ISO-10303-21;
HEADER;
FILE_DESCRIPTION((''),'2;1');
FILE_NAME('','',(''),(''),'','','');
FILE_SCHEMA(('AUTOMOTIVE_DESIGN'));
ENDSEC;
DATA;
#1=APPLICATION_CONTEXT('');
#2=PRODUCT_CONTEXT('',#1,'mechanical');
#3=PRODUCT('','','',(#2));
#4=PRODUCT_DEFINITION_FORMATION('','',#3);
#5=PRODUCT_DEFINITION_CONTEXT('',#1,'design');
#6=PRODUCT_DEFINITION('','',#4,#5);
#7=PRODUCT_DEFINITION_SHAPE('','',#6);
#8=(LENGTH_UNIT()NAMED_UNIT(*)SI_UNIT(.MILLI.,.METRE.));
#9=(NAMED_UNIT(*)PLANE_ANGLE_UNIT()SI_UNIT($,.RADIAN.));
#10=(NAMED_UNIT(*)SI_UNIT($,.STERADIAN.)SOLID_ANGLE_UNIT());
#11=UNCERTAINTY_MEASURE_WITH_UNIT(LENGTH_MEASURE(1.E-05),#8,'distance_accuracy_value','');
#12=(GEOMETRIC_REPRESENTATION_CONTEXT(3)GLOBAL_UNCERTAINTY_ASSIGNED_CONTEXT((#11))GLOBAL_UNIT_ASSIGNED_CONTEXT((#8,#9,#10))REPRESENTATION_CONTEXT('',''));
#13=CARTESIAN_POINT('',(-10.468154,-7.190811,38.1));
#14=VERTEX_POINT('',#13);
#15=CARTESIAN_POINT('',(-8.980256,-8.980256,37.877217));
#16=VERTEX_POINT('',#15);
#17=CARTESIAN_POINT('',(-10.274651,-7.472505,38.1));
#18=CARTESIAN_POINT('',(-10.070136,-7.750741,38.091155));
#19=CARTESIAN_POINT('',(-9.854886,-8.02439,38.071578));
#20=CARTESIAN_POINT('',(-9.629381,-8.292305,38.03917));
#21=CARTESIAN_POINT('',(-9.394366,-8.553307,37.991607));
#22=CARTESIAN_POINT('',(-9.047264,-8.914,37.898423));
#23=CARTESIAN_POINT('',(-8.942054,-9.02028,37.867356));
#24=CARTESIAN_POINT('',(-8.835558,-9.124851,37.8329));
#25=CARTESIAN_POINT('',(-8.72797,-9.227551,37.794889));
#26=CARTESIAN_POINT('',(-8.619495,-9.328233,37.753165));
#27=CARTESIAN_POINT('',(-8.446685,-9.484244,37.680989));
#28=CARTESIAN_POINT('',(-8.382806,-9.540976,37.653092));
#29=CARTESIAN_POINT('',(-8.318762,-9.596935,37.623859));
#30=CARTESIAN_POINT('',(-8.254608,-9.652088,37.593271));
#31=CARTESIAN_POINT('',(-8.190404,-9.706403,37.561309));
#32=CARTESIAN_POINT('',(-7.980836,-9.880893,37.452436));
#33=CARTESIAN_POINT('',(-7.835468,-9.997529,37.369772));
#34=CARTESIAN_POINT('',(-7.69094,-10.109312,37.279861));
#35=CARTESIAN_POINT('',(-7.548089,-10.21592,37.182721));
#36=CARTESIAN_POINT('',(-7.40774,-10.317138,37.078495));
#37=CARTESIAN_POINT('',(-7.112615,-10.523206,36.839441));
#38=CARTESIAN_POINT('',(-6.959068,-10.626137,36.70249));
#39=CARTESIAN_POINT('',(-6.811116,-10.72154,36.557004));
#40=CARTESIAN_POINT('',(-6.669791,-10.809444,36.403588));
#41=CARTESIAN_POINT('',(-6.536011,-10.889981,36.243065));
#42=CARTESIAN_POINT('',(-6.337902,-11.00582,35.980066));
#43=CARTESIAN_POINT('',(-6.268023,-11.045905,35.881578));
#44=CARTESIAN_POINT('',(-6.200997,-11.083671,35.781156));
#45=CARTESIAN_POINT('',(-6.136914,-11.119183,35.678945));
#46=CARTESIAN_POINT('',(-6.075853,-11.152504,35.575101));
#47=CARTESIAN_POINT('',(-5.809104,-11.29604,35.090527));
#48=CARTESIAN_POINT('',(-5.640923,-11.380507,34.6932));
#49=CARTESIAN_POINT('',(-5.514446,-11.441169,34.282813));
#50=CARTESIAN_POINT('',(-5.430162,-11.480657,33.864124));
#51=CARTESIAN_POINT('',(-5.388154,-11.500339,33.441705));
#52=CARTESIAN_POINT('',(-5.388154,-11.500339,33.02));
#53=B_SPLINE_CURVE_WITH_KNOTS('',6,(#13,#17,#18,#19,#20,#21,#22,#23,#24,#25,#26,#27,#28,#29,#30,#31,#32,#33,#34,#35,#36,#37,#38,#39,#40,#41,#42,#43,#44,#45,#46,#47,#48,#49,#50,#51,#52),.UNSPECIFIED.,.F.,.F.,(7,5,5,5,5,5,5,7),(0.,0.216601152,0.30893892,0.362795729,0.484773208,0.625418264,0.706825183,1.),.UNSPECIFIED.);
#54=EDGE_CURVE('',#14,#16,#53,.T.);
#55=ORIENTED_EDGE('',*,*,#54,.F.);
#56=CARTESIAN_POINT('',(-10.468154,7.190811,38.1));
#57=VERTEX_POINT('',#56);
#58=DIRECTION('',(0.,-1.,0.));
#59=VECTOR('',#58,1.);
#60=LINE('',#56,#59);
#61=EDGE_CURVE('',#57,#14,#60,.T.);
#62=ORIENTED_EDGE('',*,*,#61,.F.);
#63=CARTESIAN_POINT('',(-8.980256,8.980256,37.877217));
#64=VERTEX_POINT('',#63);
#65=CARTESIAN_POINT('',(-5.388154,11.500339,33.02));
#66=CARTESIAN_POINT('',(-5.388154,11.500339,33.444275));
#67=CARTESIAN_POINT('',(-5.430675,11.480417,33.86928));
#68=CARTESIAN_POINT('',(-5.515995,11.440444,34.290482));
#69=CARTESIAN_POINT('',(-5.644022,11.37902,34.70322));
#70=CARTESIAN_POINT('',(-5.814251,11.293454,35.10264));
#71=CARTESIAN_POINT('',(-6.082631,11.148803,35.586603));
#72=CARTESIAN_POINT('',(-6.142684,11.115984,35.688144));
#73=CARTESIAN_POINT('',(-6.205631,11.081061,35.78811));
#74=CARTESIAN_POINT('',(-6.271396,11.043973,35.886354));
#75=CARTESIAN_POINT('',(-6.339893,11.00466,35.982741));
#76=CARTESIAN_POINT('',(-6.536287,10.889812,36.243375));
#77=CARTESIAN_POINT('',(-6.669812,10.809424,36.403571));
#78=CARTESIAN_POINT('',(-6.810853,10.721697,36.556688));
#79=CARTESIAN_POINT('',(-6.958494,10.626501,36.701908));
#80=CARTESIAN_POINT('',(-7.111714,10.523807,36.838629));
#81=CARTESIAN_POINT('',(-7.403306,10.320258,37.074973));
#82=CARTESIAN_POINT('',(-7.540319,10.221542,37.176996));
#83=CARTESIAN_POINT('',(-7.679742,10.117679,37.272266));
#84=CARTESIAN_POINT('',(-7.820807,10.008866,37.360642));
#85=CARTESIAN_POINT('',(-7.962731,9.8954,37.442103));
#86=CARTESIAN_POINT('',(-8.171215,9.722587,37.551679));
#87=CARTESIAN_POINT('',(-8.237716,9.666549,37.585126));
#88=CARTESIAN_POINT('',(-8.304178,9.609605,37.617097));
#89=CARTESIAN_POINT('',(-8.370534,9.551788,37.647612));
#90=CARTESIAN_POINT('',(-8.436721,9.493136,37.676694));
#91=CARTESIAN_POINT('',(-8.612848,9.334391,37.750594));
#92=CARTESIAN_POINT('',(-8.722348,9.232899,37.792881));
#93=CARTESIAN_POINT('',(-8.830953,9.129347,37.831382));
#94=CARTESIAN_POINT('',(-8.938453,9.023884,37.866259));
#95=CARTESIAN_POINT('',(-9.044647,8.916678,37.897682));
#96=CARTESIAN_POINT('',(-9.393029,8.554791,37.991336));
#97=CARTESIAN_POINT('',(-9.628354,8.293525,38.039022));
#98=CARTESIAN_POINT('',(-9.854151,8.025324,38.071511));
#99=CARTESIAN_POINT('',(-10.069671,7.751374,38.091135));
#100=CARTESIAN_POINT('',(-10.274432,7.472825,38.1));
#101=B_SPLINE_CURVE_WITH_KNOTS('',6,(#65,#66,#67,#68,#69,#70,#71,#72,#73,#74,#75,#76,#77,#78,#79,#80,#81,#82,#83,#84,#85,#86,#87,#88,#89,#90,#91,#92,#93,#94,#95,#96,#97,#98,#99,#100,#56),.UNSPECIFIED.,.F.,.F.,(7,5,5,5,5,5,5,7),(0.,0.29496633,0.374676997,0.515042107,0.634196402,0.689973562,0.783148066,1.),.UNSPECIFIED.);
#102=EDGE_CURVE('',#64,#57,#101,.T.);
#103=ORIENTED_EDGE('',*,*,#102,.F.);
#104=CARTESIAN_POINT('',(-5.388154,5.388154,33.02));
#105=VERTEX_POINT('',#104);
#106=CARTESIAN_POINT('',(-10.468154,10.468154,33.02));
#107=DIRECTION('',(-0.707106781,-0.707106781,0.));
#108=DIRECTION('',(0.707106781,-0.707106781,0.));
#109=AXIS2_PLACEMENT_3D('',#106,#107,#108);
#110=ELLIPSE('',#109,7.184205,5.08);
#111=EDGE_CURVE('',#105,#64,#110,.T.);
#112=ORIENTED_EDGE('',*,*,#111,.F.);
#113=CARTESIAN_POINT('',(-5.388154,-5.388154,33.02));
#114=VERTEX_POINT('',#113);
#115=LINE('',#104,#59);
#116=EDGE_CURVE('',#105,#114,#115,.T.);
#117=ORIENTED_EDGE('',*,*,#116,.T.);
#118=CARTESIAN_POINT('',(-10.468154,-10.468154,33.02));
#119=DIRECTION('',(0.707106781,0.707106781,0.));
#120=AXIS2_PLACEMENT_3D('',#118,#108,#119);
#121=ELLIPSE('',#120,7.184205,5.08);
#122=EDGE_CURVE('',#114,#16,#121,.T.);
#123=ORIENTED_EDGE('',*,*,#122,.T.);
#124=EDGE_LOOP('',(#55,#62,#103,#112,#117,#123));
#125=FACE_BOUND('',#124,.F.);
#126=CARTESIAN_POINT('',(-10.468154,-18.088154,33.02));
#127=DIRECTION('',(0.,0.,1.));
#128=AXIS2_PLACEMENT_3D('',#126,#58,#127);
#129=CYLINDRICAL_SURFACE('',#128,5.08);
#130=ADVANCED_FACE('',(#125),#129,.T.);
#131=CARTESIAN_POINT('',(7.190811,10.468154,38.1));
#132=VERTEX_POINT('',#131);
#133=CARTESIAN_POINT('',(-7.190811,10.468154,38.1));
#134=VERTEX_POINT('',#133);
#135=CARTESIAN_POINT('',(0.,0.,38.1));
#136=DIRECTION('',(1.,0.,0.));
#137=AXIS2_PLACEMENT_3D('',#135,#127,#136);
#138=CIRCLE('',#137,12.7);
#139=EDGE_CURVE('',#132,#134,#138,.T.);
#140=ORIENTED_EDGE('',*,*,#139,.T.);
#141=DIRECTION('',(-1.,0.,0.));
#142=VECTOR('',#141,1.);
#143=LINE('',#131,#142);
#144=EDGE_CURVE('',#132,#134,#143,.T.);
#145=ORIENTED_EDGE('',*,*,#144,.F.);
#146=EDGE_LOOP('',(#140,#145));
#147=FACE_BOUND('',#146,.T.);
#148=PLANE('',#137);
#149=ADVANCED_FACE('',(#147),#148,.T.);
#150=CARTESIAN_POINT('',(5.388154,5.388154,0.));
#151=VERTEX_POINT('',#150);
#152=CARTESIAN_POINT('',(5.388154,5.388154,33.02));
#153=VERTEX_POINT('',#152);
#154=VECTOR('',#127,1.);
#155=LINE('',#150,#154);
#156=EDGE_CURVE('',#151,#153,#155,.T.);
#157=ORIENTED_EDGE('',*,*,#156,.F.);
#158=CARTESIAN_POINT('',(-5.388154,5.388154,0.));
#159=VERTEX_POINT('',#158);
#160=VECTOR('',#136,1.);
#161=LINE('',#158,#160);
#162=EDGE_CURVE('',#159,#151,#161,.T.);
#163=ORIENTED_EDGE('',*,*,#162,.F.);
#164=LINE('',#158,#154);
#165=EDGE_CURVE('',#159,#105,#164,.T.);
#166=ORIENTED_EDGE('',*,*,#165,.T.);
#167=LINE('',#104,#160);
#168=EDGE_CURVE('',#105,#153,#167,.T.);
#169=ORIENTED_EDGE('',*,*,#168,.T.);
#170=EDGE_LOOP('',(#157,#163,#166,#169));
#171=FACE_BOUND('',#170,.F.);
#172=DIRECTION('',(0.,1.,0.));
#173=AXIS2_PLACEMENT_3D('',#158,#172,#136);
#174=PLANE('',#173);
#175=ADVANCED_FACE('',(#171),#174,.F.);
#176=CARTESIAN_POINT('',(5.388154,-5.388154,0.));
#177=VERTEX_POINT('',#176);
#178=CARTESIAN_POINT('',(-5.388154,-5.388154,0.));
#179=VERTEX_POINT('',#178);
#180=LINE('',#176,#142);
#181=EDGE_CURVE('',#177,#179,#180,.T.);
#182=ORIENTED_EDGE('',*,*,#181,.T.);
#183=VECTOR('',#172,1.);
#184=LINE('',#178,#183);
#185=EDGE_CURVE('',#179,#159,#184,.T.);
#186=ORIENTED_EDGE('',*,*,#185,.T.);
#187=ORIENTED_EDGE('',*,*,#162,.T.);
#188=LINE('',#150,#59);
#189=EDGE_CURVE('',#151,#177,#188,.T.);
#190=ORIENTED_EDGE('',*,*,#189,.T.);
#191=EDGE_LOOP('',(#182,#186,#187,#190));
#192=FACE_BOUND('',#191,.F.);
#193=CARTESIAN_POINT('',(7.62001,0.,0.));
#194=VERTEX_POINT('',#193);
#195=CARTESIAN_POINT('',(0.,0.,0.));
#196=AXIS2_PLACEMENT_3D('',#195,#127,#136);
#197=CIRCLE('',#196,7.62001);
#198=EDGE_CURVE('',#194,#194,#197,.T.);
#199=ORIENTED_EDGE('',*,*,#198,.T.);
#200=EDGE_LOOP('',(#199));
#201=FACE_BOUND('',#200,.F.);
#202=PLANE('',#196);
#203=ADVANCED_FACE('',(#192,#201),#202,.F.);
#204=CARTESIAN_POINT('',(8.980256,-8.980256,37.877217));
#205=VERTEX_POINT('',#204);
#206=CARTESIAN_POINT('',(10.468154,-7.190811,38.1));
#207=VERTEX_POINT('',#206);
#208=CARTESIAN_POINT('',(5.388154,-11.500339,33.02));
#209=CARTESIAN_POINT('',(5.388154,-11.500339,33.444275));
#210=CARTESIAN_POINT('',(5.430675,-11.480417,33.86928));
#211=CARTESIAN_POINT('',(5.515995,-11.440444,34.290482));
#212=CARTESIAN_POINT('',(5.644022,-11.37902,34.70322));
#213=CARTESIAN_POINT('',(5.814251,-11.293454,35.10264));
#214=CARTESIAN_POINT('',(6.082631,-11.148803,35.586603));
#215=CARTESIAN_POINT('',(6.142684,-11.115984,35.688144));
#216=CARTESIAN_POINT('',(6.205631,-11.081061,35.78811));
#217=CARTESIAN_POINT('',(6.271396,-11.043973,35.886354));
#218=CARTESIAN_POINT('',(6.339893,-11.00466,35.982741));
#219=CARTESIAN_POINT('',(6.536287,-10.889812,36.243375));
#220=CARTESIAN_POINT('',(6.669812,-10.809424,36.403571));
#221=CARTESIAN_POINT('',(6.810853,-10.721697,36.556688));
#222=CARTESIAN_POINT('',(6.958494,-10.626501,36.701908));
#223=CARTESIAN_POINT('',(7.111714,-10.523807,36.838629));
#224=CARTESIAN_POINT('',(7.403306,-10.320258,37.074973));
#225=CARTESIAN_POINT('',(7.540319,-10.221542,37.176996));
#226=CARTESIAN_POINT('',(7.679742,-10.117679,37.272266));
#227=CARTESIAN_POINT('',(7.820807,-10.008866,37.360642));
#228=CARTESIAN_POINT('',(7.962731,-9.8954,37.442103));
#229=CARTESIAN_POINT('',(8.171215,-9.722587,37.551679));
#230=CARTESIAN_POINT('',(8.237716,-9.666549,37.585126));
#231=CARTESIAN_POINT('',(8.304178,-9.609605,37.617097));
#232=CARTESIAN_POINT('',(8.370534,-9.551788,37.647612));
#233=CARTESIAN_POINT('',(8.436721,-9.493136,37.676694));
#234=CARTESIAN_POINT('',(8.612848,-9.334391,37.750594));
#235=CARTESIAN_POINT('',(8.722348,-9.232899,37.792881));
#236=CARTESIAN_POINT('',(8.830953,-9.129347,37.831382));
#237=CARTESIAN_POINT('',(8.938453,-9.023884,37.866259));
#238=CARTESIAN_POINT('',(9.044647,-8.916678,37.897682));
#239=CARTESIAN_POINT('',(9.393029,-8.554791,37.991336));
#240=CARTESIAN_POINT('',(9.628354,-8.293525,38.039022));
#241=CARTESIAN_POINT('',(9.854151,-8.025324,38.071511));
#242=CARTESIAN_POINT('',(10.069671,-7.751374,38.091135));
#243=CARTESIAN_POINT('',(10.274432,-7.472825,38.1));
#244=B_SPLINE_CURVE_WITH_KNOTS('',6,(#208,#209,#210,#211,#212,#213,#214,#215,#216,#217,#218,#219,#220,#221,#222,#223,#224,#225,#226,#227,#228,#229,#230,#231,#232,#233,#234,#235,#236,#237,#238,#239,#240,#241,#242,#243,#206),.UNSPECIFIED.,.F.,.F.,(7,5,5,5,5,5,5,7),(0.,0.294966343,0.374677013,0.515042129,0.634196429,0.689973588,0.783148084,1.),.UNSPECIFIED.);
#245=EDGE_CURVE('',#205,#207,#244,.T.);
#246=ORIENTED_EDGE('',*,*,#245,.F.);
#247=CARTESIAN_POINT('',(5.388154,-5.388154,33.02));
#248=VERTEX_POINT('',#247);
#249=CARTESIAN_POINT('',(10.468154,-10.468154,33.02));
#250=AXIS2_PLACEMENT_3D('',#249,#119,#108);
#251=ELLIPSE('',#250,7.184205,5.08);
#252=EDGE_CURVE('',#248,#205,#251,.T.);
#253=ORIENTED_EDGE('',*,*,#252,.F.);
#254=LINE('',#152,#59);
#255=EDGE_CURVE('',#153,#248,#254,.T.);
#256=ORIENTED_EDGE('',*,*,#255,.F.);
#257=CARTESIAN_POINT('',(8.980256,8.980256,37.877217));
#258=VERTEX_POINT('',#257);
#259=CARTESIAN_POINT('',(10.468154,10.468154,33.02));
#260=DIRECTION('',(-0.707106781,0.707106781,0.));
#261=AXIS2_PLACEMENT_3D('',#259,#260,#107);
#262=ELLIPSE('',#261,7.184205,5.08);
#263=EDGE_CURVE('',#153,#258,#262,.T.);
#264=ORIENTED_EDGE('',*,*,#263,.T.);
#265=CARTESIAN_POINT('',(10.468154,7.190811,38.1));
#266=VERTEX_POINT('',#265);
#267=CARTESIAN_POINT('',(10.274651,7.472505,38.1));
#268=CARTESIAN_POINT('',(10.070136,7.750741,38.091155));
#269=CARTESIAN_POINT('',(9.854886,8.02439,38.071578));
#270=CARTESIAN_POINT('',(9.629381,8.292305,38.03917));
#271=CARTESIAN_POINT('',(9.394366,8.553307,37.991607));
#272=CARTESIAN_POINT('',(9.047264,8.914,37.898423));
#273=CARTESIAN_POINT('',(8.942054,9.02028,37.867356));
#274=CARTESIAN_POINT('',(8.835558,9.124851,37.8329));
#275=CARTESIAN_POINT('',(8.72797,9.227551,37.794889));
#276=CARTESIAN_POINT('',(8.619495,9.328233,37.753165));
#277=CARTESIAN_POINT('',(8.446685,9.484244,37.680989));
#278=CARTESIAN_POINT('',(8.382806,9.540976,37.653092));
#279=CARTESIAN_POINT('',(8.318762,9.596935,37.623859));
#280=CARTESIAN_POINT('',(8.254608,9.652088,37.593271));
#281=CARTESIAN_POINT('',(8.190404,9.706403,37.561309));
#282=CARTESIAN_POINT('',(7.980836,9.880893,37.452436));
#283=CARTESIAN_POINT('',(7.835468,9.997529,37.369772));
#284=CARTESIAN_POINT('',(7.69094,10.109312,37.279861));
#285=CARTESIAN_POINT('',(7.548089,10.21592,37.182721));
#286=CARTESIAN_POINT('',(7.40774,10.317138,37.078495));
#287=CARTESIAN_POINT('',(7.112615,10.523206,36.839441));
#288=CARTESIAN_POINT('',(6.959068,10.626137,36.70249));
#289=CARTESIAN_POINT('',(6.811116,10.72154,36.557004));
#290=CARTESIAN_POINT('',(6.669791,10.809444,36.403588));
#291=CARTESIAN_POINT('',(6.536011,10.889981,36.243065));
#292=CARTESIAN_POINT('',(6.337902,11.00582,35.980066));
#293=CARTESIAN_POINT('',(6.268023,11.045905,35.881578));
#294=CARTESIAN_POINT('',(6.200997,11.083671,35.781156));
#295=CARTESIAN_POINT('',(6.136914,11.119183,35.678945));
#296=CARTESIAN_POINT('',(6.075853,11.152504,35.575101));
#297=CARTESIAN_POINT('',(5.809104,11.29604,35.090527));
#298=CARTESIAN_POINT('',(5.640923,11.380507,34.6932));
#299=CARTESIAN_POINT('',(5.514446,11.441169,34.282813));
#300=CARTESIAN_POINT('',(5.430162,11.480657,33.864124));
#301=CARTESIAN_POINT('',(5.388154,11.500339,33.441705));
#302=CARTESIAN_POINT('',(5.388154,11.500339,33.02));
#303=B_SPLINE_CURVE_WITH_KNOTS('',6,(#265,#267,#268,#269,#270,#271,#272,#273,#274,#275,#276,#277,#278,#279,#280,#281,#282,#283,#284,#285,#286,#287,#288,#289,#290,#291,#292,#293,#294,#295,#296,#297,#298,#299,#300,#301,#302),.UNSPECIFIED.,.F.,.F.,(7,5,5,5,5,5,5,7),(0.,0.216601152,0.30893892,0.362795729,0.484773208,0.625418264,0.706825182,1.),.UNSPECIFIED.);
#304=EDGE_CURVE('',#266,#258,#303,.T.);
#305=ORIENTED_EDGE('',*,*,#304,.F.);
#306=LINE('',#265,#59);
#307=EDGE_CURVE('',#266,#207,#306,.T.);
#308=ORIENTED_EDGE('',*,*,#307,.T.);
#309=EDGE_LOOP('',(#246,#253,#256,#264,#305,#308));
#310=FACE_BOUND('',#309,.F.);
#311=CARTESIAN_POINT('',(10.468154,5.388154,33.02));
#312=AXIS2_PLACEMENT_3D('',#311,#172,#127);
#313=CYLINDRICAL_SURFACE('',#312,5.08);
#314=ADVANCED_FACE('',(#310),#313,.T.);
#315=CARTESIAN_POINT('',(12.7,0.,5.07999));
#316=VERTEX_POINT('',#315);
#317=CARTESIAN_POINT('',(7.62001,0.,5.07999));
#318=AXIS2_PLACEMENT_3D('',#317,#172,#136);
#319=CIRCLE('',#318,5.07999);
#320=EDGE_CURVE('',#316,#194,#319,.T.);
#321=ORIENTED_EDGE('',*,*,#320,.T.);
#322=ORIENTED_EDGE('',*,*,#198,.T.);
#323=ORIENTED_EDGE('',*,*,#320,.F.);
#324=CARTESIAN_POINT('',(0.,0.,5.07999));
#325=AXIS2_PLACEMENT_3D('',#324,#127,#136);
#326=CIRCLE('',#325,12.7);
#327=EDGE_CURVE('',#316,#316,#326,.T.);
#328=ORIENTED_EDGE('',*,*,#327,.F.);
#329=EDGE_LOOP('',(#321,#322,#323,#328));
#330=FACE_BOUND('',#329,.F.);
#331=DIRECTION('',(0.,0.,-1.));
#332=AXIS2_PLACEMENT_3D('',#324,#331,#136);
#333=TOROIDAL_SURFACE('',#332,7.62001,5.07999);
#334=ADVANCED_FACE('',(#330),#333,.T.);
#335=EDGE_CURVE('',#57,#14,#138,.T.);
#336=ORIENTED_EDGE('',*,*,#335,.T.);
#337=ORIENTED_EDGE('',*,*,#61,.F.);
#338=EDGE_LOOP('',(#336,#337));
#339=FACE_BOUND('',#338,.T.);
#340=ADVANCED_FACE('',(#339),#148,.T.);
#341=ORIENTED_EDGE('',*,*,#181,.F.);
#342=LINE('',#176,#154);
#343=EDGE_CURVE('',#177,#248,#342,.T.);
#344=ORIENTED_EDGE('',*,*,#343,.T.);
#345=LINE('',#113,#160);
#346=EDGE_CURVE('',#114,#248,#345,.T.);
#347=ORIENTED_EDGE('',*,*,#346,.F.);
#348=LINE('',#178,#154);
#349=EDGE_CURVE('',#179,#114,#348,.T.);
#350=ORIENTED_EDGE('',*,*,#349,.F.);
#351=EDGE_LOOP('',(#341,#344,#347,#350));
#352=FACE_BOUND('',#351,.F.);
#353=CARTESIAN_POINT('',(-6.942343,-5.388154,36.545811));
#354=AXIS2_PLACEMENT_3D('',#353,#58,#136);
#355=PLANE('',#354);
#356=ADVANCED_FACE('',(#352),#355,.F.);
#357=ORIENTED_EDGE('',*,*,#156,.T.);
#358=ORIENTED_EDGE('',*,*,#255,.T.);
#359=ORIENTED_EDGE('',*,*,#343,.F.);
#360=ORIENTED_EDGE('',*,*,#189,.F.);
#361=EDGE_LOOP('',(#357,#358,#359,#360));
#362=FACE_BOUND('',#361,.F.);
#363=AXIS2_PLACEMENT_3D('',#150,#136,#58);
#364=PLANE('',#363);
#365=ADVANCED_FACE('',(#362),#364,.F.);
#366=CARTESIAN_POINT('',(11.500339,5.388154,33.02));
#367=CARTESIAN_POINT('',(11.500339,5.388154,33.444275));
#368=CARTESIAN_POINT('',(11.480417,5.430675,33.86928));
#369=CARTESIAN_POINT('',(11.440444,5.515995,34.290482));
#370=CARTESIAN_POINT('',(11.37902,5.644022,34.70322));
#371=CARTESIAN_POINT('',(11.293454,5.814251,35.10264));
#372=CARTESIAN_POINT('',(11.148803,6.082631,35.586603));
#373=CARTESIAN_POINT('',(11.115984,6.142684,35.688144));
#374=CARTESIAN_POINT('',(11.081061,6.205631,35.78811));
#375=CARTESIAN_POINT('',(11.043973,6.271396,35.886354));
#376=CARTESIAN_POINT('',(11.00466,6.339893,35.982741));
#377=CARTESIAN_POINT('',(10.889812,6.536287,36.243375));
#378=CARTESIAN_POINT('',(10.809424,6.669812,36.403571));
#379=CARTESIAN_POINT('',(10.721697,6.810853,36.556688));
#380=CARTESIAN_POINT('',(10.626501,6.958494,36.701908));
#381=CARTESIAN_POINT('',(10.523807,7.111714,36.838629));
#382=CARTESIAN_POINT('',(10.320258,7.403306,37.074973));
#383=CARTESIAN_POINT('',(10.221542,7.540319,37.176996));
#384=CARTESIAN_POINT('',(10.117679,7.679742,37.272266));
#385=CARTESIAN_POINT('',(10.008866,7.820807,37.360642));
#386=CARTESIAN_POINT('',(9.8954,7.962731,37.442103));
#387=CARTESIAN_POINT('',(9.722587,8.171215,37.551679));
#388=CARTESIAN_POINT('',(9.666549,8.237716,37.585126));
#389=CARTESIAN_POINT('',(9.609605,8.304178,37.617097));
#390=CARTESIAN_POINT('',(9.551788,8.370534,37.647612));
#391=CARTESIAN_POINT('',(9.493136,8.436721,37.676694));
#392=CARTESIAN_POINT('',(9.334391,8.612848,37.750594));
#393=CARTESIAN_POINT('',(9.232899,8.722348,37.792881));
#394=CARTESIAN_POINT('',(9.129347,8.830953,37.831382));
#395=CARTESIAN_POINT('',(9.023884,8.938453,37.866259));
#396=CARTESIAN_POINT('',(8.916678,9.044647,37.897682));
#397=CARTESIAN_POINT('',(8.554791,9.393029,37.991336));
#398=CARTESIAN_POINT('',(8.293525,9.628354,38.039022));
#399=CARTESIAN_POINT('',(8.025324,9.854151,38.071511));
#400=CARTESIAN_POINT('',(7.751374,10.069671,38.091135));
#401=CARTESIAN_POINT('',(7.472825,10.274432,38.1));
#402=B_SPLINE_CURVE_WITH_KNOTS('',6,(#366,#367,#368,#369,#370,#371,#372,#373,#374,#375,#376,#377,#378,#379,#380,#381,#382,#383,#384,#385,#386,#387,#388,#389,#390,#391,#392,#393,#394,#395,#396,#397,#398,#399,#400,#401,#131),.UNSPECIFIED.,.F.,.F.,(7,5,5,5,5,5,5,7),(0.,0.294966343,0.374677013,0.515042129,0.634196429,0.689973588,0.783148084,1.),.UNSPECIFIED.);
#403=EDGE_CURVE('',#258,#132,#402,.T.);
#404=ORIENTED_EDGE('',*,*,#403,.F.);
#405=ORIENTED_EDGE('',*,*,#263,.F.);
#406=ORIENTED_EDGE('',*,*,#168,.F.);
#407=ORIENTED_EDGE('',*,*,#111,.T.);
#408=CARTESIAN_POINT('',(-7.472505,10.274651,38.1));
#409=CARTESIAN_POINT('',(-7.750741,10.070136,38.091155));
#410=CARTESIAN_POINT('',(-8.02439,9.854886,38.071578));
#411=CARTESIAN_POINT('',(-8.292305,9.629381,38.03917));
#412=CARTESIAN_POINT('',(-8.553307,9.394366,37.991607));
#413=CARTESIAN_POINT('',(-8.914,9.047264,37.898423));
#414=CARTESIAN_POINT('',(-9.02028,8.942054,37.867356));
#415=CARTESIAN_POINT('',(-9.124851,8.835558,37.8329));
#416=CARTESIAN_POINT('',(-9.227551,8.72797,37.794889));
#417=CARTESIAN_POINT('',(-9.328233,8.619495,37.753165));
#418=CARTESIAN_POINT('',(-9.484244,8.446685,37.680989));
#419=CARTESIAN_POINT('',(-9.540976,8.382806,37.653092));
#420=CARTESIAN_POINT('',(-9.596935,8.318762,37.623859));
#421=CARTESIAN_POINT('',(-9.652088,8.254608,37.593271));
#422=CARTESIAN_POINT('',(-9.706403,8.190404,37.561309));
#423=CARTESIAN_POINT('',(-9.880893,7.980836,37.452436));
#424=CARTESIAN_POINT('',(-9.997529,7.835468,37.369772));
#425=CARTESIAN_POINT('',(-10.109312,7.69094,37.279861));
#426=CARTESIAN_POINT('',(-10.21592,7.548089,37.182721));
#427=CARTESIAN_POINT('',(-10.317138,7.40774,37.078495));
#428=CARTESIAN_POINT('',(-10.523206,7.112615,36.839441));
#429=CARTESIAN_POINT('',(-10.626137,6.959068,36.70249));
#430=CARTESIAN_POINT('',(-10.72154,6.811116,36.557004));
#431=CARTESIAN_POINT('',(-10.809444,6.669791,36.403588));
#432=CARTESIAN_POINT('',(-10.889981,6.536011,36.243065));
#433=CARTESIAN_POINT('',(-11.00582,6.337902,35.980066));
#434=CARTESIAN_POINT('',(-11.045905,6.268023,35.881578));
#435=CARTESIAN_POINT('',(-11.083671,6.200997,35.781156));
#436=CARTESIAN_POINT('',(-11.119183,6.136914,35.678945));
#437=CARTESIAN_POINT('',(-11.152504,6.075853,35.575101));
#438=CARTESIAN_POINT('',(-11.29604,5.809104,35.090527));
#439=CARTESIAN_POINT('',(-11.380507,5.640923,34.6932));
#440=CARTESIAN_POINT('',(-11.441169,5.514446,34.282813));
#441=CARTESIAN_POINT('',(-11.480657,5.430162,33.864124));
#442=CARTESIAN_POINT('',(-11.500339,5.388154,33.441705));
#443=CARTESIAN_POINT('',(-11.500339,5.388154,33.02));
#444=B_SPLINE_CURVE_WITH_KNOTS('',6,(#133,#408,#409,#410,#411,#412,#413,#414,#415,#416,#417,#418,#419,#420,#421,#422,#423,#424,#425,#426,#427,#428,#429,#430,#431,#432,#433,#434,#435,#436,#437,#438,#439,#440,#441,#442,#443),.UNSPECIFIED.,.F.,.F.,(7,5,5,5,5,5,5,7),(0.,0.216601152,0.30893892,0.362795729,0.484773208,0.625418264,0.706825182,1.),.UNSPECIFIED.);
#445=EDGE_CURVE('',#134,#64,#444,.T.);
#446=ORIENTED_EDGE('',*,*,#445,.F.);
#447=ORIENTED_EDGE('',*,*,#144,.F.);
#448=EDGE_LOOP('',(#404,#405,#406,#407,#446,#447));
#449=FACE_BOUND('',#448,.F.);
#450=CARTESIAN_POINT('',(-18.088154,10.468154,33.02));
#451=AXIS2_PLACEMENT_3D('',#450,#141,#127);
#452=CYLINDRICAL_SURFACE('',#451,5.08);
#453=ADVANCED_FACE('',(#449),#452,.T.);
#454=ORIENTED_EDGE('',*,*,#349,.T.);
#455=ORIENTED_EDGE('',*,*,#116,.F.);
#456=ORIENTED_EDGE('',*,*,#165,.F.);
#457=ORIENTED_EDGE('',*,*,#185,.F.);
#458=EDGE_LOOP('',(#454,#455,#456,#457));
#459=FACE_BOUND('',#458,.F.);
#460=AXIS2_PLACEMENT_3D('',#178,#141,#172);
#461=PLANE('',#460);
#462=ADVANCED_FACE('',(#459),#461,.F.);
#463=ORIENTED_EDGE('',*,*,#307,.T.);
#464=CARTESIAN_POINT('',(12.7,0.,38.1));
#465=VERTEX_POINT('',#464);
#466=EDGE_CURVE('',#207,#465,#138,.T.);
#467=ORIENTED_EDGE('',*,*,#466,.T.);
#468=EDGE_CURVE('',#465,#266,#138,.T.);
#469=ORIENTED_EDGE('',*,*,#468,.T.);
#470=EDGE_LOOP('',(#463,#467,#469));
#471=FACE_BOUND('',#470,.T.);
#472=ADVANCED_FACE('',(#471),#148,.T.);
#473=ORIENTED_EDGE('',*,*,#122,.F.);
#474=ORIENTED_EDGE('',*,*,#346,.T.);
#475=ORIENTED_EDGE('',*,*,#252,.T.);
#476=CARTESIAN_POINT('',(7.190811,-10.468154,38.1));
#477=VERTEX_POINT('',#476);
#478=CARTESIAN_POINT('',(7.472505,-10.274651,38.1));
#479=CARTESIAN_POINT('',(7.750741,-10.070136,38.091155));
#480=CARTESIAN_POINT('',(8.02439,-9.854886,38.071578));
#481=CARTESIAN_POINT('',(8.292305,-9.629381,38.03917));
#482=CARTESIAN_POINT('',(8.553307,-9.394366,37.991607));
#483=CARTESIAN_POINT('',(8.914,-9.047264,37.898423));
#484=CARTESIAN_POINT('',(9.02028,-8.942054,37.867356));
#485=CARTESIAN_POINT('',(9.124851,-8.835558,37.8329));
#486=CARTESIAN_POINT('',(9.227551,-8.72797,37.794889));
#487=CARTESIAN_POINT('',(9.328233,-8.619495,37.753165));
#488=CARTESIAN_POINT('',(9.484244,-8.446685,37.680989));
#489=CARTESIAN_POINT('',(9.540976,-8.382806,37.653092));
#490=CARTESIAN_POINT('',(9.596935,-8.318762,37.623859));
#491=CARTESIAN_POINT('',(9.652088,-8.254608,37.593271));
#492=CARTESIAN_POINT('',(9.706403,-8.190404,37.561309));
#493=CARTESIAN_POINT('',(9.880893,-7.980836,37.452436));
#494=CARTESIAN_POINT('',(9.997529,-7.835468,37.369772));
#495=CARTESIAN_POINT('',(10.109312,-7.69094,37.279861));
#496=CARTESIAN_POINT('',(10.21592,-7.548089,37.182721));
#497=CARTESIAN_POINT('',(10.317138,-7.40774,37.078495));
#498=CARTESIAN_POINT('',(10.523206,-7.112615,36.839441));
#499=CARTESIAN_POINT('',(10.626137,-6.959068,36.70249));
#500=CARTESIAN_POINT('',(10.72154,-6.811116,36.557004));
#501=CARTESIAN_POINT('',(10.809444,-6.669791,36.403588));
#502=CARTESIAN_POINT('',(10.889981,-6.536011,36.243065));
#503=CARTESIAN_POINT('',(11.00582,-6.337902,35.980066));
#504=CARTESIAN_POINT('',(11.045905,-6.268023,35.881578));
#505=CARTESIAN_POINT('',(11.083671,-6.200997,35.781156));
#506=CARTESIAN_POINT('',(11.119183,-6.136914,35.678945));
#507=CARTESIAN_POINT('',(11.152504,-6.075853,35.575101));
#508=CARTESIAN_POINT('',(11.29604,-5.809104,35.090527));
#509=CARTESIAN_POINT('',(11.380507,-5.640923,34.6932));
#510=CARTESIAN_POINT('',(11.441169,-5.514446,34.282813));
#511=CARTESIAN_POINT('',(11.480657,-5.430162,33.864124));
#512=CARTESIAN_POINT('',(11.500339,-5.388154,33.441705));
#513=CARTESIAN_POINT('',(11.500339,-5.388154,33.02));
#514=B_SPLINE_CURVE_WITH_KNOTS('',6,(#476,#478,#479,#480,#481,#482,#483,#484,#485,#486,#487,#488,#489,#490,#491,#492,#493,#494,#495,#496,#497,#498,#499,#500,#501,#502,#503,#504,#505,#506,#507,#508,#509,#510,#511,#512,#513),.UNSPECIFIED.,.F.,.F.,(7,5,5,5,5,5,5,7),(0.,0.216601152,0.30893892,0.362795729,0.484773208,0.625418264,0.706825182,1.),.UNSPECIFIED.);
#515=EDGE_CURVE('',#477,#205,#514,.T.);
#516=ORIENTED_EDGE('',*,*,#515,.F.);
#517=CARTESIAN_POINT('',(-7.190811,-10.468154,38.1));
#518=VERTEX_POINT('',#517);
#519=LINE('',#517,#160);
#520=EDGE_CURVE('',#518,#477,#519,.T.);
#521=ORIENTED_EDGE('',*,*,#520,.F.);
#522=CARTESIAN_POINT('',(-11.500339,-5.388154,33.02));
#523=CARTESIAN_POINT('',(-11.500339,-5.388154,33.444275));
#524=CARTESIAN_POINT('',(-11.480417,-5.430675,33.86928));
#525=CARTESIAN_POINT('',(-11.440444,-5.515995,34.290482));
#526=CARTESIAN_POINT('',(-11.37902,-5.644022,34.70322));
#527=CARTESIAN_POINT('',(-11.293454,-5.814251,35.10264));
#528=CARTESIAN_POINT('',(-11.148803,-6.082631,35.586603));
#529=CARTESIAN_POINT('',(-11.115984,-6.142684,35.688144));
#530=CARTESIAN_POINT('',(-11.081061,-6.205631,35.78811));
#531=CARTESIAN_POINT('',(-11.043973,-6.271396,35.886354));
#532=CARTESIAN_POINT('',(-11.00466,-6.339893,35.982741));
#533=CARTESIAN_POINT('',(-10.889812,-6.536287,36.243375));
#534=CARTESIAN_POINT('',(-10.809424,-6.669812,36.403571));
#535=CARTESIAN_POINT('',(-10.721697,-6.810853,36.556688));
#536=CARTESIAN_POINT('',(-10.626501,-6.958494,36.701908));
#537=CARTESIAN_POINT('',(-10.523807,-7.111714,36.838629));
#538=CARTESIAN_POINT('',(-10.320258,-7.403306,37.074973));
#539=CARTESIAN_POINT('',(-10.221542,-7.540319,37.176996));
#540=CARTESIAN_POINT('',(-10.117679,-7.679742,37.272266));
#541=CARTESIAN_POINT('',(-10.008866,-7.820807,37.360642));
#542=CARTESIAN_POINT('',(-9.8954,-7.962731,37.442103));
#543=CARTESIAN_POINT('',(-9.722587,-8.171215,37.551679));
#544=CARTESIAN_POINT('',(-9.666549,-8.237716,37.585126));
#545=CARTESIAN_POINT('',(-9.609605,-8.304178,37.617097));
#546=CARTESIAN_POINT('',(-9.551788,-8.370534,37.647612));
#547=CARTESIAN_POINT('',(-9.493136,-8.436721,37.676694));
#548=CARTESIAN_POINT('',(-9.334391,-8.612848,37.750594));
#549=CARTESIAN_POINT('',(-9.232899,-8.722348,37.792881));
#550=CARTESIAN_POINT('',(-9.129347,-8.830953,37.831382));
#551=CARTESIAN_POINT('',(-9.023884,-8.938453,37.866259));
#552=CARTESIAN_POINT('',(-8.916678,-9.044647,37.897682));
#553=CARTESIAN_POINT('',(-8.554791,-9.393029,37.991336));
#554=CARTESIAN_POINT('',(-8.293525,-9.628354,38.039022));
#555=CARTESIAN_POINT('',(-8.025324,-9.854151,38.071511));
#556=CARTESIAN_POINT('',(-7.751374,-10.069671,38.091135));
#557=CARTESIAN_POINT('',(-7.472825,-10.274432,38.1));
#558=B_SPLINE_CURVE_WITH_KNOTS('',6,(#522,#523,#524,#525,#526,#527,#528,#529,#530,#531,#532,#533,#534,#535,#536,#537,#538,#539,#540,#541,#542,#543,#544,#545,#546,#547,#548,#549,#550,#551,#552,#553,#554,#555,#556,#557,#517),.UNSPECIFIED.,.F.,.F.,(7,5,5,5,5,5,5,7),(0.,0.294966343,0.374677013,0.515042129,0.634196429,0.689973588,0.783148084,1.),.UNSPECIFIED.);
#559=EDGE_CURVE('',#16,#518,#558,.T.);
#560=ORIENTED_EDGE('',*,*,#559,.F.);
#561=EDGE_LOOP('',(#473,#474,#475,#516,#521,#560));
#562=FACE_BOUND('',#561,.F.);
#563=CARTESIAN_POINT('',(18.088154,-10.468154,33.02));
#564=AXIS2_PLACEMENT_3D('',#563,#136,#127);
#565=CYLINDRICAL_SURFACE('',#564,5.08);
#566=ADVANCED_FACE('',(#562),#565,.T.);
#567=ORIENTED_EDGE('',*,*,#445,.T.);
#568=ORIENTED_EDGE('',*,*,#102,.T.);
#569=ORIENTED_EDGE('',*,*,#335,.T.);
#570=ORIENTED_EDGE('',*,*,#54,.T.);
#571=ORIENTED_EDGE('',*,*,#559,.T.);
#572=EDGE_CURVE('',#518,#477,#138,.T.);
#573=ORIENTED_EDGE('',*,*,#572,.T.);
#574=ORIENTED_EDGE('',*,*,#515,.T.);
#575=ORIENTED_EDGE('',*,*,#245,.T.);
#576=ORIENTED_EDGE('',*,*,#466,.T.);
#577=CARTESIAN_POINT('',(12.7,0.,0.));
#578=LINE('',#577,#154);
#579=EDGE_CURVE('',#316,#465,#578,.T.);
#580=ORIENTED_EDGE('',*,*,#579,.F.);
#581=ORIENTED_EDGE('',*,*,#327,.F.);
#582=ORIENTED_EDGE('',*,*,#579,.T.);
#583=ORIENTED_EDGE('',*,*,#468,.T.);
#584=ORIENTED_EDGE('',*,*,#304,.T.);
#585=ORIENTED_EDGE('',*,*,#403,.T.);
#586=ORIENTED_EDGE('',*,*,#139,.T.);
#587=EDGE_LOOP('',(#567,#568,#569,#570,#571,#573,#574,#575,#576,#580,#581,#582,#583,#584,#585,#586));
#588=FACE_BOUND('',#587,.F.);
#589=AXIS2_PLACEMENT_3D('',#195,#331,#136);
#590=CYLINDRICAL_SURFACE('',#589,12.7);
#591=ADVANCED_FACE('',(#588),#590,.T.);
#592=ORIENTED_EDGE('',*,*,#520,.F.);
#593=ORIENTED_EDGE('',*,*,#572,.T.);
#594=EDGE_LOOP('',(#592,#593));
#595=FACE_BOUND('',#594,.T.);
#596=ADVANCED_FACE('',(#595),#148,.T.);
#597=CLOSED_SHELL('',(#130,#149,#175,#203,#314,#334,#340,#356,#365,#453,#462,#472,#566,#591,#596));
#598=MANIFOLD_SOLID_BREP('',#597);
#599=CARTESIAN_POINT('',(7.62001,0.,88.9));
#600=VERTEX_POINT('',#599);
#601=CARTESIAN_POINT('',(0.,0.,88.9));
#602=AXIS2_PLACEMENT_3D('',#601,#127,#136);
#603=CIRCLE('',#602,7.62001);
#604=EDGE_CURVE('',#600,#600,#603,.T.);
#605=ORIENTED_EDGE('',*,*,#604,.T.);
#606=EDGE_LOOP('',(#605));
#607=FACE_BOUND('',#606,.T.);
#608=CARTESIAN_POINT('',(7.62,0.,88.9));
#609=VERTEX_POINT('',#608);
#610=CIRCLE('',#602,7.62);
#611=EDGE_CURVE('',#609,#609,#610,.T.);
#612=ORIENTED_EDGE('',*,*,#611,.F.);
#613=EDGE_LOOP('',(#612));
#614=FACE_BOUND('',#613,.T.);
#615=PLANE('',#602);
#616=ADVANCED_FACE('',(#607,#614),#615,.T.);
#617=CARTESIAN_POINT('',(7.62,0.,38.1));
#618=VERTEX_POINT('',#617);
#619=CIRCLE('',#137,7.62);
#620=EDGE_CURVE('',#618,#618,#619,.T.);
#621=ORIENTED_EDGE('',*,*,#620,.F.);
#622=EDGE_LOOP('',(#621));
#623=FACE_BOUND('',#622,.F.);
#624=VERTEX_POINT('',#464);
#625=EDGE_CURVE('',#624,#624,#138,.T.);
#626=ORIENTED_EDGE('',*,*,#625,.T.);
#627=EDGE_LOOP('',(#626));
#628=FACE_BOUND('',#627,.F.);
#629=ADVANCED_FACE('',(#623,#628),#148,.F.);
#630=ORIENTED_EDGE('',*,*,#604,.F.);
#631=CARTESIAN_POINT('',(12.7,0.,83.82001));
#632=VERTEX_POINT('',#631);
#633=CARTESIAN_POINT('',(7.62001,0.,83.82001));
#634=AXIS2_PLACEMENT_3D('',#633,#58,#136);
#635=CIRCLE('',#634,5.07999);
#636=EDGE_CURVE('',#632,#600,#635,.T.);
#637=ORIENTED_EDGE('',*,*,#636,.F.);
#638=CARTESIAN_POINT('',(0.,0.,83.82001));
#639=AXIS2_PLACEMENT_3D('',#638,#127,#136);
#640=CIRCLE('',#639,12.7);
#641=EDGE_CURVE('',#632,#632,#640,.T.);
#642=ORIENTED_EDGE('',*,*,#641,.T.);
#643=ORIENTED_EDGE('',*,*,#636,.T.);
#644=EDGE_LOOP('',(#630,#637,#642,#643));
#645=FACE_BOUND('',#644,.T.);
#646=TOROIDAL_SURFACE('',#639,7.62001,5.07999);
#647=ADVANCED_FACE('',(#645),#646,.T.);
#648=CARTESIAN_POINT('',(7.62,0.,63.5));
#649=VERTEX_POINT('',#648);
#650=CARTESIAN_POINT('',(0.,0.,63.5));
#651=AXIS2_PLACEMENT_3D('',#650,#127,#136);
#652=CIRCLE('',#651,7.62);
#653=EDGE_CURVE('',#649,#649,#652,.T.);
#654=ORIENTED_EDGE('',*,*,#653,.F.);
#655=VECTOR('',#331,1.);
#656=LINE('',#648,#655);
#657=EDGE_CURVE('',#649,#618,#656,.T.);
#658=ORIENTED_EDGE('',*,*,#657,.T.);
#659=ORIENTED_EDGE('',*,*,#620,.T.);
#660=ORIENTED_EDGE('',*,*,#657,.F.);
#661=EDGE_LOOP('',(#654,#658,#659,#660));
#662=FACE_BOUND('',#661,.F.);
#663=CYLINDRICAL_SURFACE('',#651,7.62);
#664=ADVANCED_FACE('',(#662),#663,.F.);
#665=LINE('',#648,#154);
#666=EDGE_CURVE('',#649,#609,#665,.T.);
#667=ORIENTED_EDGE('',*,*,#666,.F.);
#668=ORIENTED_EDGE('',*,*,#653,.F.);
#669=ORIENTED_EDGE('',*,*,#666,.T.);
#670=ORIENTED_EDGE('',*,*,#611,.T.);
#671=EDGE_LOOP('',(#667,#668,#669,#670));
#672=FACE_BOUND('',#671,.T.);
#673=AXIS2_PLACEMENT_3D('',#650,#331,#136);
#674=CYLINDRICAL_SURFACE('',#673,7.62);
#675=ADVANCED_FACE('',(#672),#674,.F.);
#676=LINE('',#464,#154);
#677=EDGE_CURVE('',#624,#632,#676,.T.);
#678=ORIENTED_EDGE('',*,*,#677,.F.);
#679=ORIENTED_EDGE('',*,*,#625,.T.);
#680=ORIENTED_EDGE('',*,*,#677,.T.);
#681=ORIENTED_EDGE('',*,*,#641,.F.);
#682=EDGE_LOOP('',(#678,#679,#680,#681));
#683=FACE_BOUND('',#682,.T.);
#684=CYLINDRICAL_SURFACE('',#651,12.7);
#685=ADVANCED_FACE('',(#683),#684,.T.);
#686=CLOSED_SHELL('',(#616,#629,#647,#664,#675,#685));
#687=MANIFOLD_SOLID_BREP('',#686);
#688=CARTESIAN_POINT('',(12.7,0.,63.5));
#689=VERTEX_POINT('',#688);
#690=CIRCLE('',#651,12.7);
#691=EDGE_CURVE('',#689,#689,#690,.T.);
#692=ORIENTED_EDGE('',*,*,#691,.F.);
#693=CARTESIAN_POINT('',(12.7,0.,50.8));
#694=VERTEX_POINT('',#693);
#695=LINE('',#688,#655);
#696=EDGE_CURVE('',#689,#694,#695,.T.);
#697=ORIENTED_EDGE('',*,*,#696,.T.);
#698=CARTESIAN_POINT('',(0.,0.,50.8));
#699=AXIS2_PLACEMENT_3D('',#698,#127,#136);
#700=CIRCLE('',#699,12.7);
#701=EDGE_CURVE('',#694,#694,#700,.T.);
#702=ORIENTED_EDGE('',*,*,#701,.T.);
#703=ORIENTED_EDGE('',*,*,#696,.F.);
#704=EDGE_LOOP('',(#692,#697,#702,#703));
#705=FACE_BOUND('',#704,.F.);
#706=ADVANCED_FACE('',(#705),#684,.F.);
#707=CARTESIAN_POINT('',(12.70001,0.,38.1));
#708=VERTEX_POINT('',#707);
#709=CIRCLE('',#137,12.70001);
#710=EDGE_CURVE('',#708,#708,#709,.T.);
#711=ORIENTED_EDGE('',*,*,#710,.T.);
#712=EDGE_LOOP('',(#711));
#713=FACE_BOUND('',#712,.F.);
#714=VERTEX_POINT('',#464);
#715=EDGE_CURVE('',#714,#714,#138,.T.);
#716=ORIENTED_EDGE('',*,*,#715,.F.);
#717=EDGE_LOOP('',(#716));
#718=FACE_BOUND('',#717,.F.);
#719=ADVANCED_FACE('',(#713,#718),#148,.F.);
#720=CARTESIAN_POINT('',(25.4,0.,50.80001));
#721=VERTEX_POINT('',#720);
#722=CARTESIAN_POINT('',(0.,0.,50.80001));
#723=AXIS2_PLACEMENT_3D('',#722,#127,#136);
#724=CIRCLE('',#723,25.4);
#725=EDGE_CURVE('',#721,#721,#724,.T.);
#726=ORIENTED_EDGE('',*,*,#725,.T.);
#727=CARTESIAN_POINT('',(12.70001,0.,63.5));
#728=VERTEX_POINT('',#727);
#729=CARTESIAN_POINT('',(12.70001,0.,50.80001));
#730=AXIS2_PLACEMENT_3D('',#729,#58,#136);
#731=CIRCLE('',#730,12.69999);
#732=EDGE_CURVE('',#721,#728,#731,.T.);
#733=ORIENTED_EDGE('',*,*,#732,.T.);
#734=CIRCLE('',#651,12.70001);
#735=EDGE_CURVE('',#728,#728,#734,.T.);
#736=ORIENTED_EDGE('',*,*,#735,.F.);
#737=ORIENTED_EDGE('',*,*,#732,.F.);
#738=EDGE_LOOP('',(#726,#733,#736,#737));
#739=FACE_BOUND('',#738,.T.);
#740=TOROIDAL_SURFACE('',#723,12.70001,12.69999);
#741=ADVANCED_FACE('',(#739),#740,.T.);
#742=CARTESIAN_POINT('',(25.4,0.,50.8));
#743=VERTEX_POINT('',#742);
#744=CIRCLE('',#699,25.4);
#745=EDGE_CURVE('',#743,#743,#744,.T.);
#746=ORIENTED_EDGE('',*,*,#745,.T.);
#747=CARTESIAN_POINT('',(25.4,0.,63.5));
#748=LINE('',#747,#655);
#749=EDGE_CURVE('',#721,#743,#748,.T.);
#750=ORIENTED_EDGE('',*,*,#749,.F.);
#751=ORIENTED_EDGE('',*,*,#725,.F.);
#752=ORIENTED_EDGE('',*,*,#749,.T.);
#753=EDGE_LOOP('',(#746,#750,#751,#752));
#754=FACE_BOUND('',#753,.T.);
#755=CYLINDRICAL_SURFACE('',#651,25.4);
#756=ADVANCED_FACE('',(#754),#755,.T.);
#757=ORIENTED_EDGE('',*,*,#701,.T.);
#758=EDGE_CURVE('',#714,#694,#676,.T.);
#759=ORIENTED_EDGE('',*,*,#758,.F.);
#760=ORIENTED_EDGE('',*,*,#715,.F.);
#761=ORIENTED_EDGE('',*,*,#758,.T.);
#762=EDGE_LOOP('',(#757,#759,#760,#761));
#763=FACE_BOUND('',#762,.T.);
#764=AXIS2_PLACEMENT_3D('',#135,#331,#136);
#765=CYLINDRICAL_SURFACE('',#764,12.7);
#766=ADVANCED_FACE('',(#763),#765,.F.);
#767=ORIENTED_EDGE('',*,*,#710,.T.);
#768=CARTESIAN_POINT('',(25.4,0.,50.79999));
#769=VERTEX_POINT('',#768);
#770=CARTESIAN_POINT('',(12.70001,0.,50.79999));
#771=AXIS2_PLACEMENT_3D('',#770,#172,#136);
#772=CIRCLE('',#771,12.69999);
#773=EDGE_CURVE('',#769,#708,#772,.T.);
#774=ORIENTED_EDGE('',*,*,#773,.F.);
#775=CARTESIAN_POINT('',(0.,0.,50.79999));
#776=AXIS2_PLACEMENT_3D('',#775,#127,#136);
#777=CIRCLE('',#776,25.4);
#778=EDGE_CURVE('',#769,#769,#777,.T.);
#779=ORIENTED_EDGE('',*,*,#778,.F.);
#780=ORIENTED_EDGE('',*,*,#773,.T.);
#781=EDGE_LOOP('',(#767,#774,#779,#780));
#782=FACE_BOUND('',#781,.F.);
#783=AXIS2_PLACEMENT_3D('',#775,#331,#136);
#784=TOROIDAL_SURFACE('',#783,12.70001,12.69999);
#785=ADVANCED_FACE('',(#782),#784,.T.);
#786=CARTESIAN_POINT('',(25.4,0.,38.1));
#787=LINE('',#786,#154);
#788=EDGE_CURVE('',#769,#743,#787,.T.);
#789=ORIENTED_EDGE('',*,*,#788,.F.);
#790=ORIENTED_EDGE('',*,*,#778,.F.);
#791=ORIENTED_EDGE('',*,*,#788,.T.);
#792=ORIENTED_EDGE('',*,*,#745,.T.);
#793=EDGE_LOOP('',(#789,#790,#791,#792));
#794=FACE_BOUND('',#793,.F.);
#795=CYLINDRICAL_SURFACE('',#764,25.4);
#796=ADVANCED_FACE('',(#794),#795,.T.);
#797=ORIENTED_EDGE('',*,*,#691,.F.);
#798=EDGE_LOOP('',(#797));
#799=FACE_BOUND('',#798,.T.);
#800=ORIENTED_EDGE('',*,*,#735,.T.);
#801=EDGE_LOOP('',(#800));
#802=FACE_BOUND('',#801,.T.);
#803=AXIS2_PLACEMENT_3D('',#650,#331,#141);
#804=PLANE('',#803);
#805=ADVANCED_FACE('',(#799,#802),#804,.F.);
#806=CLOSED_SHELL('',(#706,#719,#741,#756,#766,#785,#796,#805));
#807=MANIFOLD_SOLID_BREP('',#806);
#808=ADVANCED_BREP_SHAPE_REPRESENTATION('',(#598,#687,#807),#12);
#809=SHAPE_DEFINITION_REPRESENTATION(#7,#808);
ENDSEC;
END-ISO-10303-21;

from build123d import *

# Parameters (mm, degrees)
F0_R         = 12.7
F1_DEPTH     = 38.1
F2_R         = 25.4
F2_R_2       = 12.7
F3_DEPTH     = 12.7
F4_R         = 12.69999
F5_R         = 5.07999
F6_T1_DEPTH  = 10.7763073453
F6_T3_DEPTH  = 10.7763073453
F6_T9_DEPTH  = 23.4763073453
F6_S10_R     = 12.7
F6_T11_DEPTH = 14
F6_T15_DEPTH = 23.4763073453
F6_S16_R     = 12.7
F6_T17_DEPTH = 14
F6_T24_DEPTH = 23.4763073453
F6_S25_R     = 12.7
F6_T26_DEPTH = 14
F6_T30_DEPTH = 23.4763073453
F6_S31_R     = 12.7
F6_T32_DEPTH = 14
F6_T39_DEPTH = 23.4763073453
F6_S40_R     = 12.7
F6_T41_DEPTH = 14
F6_T45_DEPTH = 23.4763073453
F6_S46_R     = 12.7
F6_T47_DEPTH = 14
F6_T54_DEPTH = 23.4763073453
F6_S55_R     = 12.7
F6_T56_DEPTH = 14
F6_T60_DEPTH = 23.4763073453
F6_S61_R     = 12.7
F6_T62_DEPTH = 14
F9_R         = 12.7
F9_R_2       = 7.62
F10_DEPTH    = 25.4
F11_R        = 5.07999
F12_DEPTH    = 25.4


# Not quite as in the source:
# - a fillet or chamfer that OpenCascade refuses, or shapes differently, is made with other operations: its cross-section is extruded or revolved along the edge and cut away or added
# - a fillet or chamfer is up to 0.001 mm smaller than in the source, because OpenCascade refuses the exact size


with BuildPart() as f1:
    # F0 (on Top) → F1 (new body)
    with BuildSketch(Plane.XY):
        Circle(F0_R)
        with BuildLine():
            ThreePointArc((5.3881536726, 5.3881536726), (7.0399620377, 2.9160477546), (7.62, 0))
            ThreePointArc((7.62, 0), (7.0399620377, -2.9160477546), (5.3881536726, -5.3881536726))
            ThreePointArc((5.3881536726, -5.3881536726), (0, -7.62), (-5.3881536726, -5.3881536726))
            ThreePointArc((-5.3881536726, -5.3881536726), (-7.62, 0), (-5.3881536726, 5.3881536726))
            ThreePointArc((-5.3881536726, 5.3881536726), (0, 7.62), (5.3881536726, 5.3881536726))
        make_face(mode=Mode.SUBTRACT)
        with BuildLine():
            ThreePointArc((-5.3881536726, -5.3881536726), (0, -7.62), (5.3881536726, -5.3881536726))
            Line((5.3881536726, -5.3881536726), (-5.3881536726, -5.3881536726))
        make_face()
        with BuildLine():
            Line((-5.3881536726, -5.3881536726), (-5.3881536726, 5.3881536726))
            ThreePointArc((-5.3881536726, 5.3881536726), (-7.62, 0), (-5.3881536726, -5.3881536726))
        make_face()
        with BuildLine():
            ThreePointArc((5.3881536726, -5.3881536726), (7.0399620377, -2.9160477546), (7.62, 0))
            ThreePointArc((7.62, 0), (7.0399620377, 2.9160477546), (5.3881536726, 5.3881536726))
            Line((5.3881536726, 5.3881536726), (5.3881536726, -5.3881536726))
        make_face()
        with BuildLine():
            Line((-5.3881536726, 5.3881536726), (5.3881536726, 5.3881536726))
            ThreePointArc((5.3881536726, 5.3881536726), (0, 7.62), (-5.3881536726, 5.3881536726))
        make_face()
    extrude(amount=F1_DEPTH)

    # F5 (radius 5.08 in the source; OpenCascade refuses exactly that, so slightly less here)
    f5_edges = [f1.edges().sort_by_distance(p)[0] for p in [
        (-12.7, 0, 0),
    ]]
    fillet(f5_edges, radius=F5_R)

    # F6: fillet of radius 5.08 on 4 edges, made by hand

    # F6_s2 → F6_t1 (cut)
    with BuildSketch(Plane.XZ.offset(-5.3881536726)):
        with BuildLine():
            ThreePointArc((10.4681536726, 38.1), (6.8760512242, 36.6121024484), (5.3881536726, 33.02))
            Line((5.3881536726, 33.02), (5.3881536726, 38.1))
            Line((5.3881536726, 38.1), (10.4681536726, 38.1))
        make_face()
        with BuildLine():
            ThreePointArc((-10.4681536726, 38.1), (-6.8760512242, 36.6121024484), (-5.3881536726, 33.02))
            Line((-5.3881536726, 33.02), (-5.3881536726, 38.1))
            Line((-5.3881536726, 38.1), (-10.4681536726, 38.1))
        make_face()
    extrude(amount=F6_T1_DEPTH, mode=Mode.SUBTRACT)

    # F6_s4 → F6_t3 (cut)
    with BuildSketch(Plane.YZ.offset(-5.3881536726)):
        with BuildLine():
            ThreePointArc((-10.4681536726, 38.1), (-6.8760512242, 36.6121024484), (-5.3881536726, 33.02))
            Line((-5.3881536726, 33.02), (-5.3881536726, 38.1))
            Line((-5.3881536726, 38.1), (-10.4681536726, 38.1))
        make_face()
        with BuildLine():
            ThreePointArc((10.4681536726, 38.1), (6.8760512242, 36.6121024484), (5.3881536726, 33.02))
            Line((5.3881536726, 33.02), (5.3881536726, 38.1))
            Line((5.3881536726, 38.1), (10.4681536726, 38.1))
        make_face()
    extrude(amount=F6_T3_DEPTH, mode=Mode.SUBTRACT)


with BuildPart() as f3:
    # F2 (on face) → F3 (new body)
    with BuildSketch(Plane.XY.offset(38.1)):
        Circle(F2_R)
        Circle(F2_R_2, mode=Mode.SUBTRACT)
    extrude(amount=F3_DEPTH)

    # F4 (radius 12.7 in the source; OpenCascade refuses exactly that, so slightly less here)
    f4_edges = [f3.edges().sort_by_distance(p)[0] for p in [
        (-25.4, 0, 38.1),
    ]]
    fillet(f4_edges, radius=F4_R)

    # F7: F3 across face


with BuildPart() as f6_tool7:
    # F6_s8 → F6_t9 (new body)
    with BuildSketch(Plane.YZ.offset(-5.3881536726)):
        with BuildLine():
            ThreePointArc((10.4681536726, 38.1), (6.8760512242, 36.6121024484), (5.3881536726, 33.02))
            Line((5.3881536726, 33.02), (5.3881536726, 38.1))
            Line((5.3881536726, 38.1), (10.4681536726, 38.1))
        make_face()
    extrude(amount=F6_T9_DEPTH)

    # F6_s10 → F6_t11 (intersect, symmetric)
    with BuildSketch(Plane.XY.offset(35.6)):
        Circle(F6_S10_R)
    extrude(amount=F6_T11_DEPTH, both=True, mode=Mode.INTERSECT)

    split(bisect_by=Plane.YZ.offset(5.3881536726), keep=Keep.TOP)


with BuildPart() as f6_tool13:
    # F6_s14 → F6_t15 (new body)
    with BuildSketch(Plane.XZ.offset(-18.0881536726)):
        with BuildLine():
            ThreePointArc((10.4681536726, 38.1), (6.8760512242, 36.6121024484), (5.3881536726, 33.02))
            Line((5.3881536726, 33.02), (5.3881536726, 38.1))
            Line((5.3881536726, 38.1), (10.4681536726, 38.1))
        make_face()
    extrude(amount=F6_T15_DEPTH)

    # F6_s16 → F6_t17 (intersect, symmetric)
    with BuildSketch(Plane.XY.offset(35.6)):
        Circle(F6_S16_R)
    extrude(amount=F6_T17_DEPTH, both=True, mode=Mode.INTERSECT)

    split(bisect_by=Plane.XZ.offset(-5.3881536726), keep=Keep.BOTTOM)


with BuildPart() as f6_tool7_1:
    add(f6_tool7.part)

    # F6_t19: intersect F6_tool13
    add(f6_tool13.part, mode=Mode.INTERSECT)


with BuildPart() as f1_1:
    add(f1.part)

    # F6_t5: cut F6_tool7
    add(f6_tool7_1.part, mode=Mode.SUBTRACT)


with BuildPart() as f6_tool22:
    # F6_s23 → F6_t24 (new body)
    with BuildSketch(Plane.YZ.offset(18.0881536726)):
        with BuildLine():
            ThreePointArc((-10.4681536726, 38.1), (-6.8760512242, 36.6121024484), (-5.3881536726, 33.02))
            Line((-5.3881536726, 33.02), (-5.3881536726, 38.1))
            Line((-5.3881536726, 38.1), (-10.4681536726, 38.1))
        make_face()
    extrude(amount=-F6_T24_DEPTH)

    # F6_s25 → F6_t26 (intersect, symmetric)
    with BuildSketch(Plane.XY.offset(35.6)):
        Circle(F6_S25_R)
    extrude(amount=F6_T26_DEPTH, both=True, mode=Mode.INTERSECT)

    split(bisect_by=Plane.YZ.offset(5.3881536726), keep=Keep.TOP)


with BuildPart() as f6_tool28:
    # F6_s29 → F6_t30 (new body)
    with BuildSketch(Plane.XZ.offset(-5.3881536726)):
        with BuildLine():
            ThreePointArc((10.4681536726, 38.1), (6.8760512242, 36.6121024484), (5.3881536726, 33.02))
            Line((5.3881536726, 33.02), (5.3881536726, 38.1))
            Line((5.3881536726, 38.1), (10.4681536726, 38.1))
        make_face()
    extrude(amount=F6_T30_DEPTH)

    # F6_s31 → F6_t32 (intersect, symmetric)
    with BuildSketch(Plane.XY.offset(35.6)):
        Circle(F6_S31_R)
    extrude(amount=F6_T32_DEPTH, both=True, mode=Mode.INTERSECT)

    split(bisect_by=Plane.XZ.offset(5.3881536726), keep=Keep.TOP)


with BuildPart() as f6_tool22_1:
    add(f6_tool22.part)

    # F6_t34: intersect F6_tool28
    add(f6_tool28.part, mode=Mode.INTERSECT)


with BuildPart() as f1_2:
    add(f1_1.part)

    # F6_t20: cut F6_tool22
    add(f6_tool22_1.part, mode=Mode.SUBTRACT)


with BuildPart() as f6_tool37:
    # F6_s38 → F6_t39 (new body)
    with BuildSketch(Plane.YZ.offset(5.3881536726)):
        with BuildLine():
            ThreePointArc((-10.4681536726, 38.1), (-6.8760512242, 36.6121024484), (-5.3881536726, 33.02))
            Line((-5.3881536726, 33.02), (-5.3881536726, 38.1))
            Line((-5.3881536726, 38.1), (-10.4681536726, 38.1))
        make_face()
    extrude(amount=-F6_T39_DEPTH)

    # F6_s40 → F6_t41 (intersect, symmetric)
    with BuildSketch(Plane.XY.offset(35.6)):
        Circle(F6_S40_R)
    extrude(amount=F6_T41_DEPTH, both=True, mode=Mode.INTERSECT)

    split(bisect_by=Plane.YZ.offset(-5.3881536726), keep=Keep.BOTTOM)


with BuildPart() as f6_tool43:
    # F6_s44 → F6_t45 (new body)
    with BuildSketch(Plane.XZ.offset(18.0881536726)):
        with BuildLine():
            ThreePointArc((-10.4681536726, 38.1), (-6.8760512242, 36.6121024484), (-5.3881536726, 33.02))
            Line((-5.3881536726, 33.02), (-5.3881536726, 38.1))
            Line((-5.3881536726, 38.1), (-10.4681536726, 38.1))
        make_face()
    extrude(amount=-F6_T45_DEPTH)

    # F6_s46 → F6_t47 (intersect, symmetric)
    with BuildSketch(Plane.XY.offset(35.6)):
        Circle(F6_S46_R)
    extrude(amount=F6_T47_DEPTH, both=True, mode=Mode.INTERSECT)

    split(bisect_by=Plane.XZ.offset(5.3881536726), keep=Keep.TOP)


with BuildPart() as f6_tool37_1:
    add(f6_tool37.part)

    # F6_t49: intersect F6_tool43
    add(f6_tool43.part, mode=Mode.INTERSECT)


with BuildPart() as f1_3:
    add(f1_2.part)

    # F6_t35: cut F6_tool37
    add(f6_tool37_1.part, mode=Mode.SUBTRACT)


with BuildPart() as f6_tool52:
    # F6_s53 → F6_t54 (new body)
    with BuildSketch(Plane.XZ.offset(5.3881536726)):
        with BuildLine():
            ThreePointArc((-10.4681536726, 38.1), (-6.8760512242, 36.6121024484), (-5.3881536726, 33.02))
            Line((-5.3881536726, 33.02), (-5.3881536726, 38.1))
            Line((-5.3881536726, 38.1), (-10.4681536726, 38.1))
        make_face()
    extrude(amount=-F6_T54_DEPTH)

    # F6_s55 → F6_t56 (intersect, symmetric)
    with BuildSketch(Plane.XY.offset(35.6)):
        Circle(F6_S55_R)
    extrude(amount=F6_T56_DEPTH, both=True, mode=Mode.INTERSECT)

    split(bisect_by=Plane.XZ.offset(-5.3881536726), keep=Keep.BOTTOM)


with BuildPart() as f6_tool58:
    # F6_s59 → F6_t60 (new body)
    with BuildSketch(Plane.YZ.offset(-18.0881536726)):
        with BuildLine():
            ThreePointArc((10.4681536726, 38.1), (6.8760512242, 36.6121024484), (5.3881536726, 33.02))
            Line((5.3881536726, 33.02), (5.3881536726, 38.1))
            Line((5.3881536726, 38.1), (10.4681536726, 38.1))
        make_face()
    extrude(amount=F6_T60_DEPTH)

    # F6_s61 → F6_t62 (intersect, symmetric)
    with BuildSketch(Plane.XY.offset(35.6)):
        Circle(F6_S61_R)
    extrude(amount=F6_T62_DEPTH, both=True, mode=Mode.INTERSECT)

    split(bisect_by=Plane.YZ.offset(-5.3881536726), keep=Keep.BOTTOM)


with BuildPart() as f6_tool52_1:
    add(f6_tool52.part)

    # F6_t64: intersect F6_tool58
    add(f6_tool58.part, mode=Mode.INTERSECT)


with BuildPart() as f1_4:
    add(f1_3.part)

    # F6_t50: cut F6_tool52
    add(f6_tool52_1.part, mode=Mode.SUBTRACT)


with BuildPart() as f3_1:
    add(f3.part)
    add(f3.part.mirror(Plane.XY.offset(50.8)))


with BuildPart() as f10:
    # F9 (on offset) → F10 (new body)
    with BuildSketch(Plane.XY.offset(63.5)):
        Circle(F9_R)
        Circle(F9_R_2, mode=Mode.SUBTRACT)
    extrude(amount=F10_DEPTH)

    # F11 (radius 5.08 in the source; OpenCascade refuses exactly that, so slightly less here)
    f11_edges = [f10.edges().sort_by_distance(p)[0] for p in [
        (-12.7, 0, 88.9),
    ]]
    fillet(f11_edges, radius=F11_R)

    # F9 (on offset) → F12 (join)
    with BuildSketch(Plane.XY.offset(63.5)):
        Circle(F9_R)
        Circle(F9_R_2, mode=Mode.SUBTRACT)
    extrude(amount=-F12_DEPTH)


solid = Compound([f1_4.part, f3_1.part, f10.part])
